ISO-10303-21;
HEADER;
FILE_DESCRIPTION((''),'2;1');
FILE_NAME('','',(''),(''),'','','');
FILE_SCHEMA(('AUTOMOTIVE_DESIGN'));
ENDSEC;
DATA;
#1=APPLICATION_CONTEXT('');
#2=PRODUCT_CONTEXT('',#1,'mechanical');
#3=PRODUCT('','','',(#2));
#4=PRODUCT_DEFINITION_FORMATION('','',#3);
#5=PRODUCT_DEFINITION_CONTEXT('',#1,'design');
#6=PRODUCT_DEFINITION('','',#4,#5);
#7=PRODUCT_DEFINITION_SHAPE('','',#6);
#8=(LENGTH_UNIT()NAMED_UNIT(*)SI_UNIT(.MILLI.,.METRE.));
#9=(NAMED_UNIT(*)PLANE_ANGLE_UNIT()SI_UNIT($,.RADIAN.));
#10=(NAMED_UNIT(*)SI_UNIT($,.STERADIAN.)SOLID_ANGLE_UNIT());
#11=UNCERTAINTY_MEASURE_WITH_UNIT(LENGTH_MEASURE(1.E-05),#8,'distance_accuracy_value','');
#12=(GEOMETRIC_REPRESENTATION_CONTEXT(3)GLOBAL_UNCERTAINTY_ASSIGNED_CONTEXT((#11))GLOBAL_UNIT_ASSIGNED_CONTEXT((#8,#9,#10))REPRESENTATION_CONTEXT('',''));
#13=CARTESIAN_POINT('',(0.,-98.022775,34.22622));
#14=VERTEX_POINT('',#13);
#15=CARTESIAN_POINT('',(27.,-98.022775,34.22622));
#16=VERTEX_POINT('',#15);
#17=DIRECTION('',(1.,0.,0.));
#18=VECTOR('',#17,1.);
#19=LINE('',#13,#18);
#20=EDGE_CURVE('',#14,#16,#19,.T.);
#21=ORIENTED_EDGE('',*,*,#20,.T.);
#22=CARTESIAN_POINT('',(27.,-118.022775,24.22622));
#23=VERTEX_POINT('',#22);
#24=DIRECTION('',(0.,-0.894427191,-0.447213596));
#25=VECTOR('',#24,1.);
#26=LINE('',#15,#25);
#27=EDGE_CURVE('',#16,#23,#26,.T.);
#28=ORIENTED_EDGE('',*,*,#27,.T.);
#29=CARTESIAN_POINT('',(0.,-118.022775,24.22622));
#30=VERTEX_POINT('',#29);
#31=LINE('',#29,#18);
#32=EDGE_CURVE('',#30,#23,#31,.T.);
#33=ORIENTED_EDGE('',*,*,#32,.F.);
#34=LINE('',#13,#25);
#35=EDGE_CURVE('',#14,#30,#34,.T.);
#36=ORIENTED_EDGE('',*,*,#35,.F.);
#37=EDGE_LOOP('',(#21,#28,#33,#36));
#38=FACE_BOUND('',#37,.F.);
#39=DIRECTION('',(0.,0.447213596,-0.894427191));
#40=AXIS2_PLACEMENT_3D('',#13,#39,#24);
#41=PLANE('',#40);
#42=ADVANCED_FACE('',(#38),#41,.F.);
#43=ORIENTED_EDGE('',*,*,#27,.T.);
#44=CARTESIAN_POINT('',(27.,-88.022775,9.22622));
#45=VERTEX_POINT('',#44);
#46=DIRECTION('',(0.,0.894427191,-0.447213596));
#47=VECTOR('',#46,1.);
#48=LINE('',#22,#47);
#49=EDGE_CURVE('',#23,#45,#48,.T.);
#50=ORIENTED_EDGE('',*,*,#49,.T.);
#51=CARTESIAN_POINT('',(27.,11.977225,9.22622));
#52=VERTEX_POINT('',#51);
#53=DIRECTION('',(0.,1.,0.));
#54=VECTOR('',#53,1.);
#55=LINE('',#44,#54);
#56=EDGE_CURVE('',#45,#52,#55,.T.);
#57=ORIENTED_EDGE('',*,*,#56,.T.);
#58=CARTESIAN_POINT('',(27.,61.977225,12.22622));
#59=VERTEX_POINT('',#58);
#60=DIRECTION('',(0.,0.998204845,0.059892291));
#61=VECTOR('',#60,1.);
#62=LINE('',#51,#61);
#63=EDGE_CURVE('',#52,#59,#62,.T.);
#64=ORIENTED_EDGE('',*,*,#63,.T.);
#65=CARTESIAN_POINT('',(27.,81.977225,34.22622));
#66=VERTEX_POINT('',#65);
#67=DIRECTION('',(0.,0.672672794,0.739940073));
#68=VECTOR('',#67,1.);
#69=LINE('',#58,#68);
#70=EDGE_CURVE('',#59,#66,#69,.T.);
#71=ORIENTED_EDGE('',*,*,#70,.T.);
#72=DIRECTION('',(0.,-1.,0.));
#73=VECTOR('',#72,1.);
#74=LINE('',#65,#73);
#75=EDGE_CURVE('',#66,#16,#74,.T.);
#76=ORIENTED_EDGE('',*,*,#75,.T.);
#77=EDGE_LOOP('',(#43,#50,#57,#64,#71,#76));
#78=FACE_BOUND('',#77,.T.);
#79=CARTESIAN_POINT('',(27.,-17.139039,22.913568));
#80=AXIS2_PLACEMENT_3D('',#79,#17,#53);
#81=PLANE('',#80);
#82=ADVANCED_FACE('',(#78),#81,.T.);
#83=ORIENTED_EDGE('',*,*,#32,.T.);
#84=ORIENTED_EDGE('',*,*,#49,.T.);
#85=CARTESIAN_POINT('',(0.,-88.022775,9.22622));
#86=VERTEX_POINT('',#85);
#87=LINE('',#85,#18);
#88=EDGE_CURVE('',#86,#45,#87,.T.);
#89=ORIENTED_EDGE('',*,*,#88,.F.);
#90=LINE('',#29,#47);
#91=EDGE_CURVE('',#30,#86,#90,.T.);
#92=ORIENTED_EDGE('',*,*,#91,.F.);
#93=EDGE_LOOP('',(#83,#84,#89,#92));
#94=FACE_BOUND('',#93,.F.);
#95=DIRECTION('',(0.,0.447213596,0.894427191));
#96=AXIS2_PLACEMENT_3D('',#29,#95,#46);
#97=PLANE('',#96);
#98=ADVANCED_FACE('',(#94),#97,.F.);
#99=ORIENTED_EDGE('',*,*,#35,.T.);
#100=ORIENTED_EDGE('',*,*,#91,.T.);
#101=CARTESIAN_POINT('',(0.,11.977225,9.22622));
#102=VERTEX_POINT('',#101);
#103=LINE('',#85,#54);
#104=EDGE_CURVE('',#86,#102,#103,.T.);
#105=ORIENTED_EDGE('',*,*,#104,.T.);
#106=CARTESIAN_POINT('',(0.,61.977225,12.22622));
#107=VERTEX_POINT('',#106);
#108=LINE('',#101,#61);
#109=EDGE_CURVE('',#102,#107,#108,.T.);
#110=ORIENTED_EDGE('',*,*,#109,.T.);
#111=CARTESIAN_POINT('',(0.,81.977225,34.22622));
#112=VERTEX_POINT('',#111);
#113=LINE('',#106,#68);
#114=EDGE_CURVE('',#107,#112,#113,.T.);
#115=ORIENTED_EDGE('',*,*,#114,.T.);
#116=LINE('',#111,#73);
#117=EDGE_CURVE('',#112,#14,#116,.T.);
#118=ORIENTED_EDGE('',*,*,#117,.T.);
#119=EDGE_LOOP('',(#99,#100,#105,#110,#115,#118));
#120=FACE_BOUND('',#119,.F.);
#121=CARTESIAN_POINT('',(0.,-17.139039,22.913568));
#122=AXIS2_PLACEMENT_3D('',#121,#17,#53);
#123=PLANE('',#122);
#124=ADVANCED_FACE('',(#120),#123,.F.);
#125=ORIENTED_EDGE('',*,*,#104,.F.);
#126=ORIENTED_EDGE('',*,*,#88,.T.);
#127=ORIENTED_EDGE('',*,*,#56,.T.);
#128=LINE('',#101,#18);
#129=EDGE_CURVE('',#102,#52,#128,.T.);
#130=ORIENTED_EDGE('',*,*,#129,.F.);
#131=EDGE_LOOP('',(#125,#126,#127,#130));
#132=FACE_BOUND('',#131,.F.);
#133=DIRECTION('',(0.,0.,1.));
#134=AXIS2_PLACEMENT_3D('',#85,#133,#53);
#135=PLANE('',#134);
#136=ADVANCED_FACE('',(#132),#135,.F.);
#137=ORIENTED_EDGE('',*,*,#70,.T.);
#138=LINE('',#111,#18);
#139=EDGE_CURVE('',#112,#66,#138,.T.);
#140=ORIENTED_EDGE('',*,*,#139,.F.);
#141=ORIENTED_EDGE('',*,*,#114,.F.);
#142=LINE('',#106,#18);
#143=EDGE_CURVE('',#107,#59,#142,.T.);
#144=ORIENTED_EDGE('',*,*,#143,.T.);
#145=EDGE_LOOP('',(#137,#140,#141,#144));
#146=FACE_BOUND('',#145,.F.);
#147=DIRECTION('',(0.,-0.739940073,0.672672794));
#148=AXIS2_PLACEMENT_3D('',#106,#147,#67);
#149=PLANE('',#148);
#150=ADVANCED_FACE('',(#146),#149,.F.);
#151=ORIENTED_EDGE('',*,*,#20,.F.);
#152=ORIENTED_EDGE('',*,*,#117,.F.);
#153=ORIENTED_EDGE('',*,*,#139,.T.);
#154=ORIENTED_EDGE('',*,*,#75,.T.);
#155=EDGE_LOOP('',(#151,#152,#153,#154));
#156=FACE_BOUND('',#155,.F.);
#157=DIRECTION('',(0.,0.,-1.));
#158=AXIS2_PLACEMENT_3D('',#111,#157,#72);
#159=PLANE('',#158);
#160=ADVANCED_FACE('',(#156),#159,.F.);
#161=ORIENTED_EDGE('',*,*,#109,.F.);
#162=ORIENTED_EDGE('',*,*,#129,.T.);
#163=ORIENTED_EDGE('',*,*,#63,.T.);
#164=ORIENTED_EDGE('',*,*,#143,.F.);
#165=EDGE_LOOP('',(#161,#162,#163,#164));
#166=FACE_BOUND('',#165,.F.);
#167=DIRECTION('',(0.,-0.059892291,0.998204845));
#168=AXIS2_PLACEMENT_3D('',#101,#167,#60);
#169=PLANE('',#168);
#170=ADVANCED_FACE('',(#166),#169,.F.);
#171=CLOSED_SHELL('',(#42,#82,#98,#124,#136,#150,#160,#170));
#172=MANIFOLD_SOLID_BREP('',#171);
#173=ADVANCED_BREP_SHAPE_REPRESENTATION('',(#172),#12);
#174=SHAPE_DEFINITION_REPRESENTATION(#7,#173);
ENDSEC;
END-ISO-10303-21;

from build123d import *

# Parameters (mm, degrees)
F1_DEPTH = 27


# Not quite as in the source:
# - the program builds the solid bodies; features that only make, move or delete a surface that nothing else refers to are left out


with BuildPart() as f1:
    # F0 (on Right) → F1 (new body)
    with BuildSketch(Plane.YZ):
        Polygon((81.9772246434, 34.2262196874), (-98.0227753566, 34.2262196874), (-118.0227753566, 24.2262196874), (-88.0227753566, 9.2262196874), (11.9772246434, 9.2262196874), (61.9772246434, 12.2262196874), align=None)
    extrude(amount=F1_DEPTH)


solid = f1.part
